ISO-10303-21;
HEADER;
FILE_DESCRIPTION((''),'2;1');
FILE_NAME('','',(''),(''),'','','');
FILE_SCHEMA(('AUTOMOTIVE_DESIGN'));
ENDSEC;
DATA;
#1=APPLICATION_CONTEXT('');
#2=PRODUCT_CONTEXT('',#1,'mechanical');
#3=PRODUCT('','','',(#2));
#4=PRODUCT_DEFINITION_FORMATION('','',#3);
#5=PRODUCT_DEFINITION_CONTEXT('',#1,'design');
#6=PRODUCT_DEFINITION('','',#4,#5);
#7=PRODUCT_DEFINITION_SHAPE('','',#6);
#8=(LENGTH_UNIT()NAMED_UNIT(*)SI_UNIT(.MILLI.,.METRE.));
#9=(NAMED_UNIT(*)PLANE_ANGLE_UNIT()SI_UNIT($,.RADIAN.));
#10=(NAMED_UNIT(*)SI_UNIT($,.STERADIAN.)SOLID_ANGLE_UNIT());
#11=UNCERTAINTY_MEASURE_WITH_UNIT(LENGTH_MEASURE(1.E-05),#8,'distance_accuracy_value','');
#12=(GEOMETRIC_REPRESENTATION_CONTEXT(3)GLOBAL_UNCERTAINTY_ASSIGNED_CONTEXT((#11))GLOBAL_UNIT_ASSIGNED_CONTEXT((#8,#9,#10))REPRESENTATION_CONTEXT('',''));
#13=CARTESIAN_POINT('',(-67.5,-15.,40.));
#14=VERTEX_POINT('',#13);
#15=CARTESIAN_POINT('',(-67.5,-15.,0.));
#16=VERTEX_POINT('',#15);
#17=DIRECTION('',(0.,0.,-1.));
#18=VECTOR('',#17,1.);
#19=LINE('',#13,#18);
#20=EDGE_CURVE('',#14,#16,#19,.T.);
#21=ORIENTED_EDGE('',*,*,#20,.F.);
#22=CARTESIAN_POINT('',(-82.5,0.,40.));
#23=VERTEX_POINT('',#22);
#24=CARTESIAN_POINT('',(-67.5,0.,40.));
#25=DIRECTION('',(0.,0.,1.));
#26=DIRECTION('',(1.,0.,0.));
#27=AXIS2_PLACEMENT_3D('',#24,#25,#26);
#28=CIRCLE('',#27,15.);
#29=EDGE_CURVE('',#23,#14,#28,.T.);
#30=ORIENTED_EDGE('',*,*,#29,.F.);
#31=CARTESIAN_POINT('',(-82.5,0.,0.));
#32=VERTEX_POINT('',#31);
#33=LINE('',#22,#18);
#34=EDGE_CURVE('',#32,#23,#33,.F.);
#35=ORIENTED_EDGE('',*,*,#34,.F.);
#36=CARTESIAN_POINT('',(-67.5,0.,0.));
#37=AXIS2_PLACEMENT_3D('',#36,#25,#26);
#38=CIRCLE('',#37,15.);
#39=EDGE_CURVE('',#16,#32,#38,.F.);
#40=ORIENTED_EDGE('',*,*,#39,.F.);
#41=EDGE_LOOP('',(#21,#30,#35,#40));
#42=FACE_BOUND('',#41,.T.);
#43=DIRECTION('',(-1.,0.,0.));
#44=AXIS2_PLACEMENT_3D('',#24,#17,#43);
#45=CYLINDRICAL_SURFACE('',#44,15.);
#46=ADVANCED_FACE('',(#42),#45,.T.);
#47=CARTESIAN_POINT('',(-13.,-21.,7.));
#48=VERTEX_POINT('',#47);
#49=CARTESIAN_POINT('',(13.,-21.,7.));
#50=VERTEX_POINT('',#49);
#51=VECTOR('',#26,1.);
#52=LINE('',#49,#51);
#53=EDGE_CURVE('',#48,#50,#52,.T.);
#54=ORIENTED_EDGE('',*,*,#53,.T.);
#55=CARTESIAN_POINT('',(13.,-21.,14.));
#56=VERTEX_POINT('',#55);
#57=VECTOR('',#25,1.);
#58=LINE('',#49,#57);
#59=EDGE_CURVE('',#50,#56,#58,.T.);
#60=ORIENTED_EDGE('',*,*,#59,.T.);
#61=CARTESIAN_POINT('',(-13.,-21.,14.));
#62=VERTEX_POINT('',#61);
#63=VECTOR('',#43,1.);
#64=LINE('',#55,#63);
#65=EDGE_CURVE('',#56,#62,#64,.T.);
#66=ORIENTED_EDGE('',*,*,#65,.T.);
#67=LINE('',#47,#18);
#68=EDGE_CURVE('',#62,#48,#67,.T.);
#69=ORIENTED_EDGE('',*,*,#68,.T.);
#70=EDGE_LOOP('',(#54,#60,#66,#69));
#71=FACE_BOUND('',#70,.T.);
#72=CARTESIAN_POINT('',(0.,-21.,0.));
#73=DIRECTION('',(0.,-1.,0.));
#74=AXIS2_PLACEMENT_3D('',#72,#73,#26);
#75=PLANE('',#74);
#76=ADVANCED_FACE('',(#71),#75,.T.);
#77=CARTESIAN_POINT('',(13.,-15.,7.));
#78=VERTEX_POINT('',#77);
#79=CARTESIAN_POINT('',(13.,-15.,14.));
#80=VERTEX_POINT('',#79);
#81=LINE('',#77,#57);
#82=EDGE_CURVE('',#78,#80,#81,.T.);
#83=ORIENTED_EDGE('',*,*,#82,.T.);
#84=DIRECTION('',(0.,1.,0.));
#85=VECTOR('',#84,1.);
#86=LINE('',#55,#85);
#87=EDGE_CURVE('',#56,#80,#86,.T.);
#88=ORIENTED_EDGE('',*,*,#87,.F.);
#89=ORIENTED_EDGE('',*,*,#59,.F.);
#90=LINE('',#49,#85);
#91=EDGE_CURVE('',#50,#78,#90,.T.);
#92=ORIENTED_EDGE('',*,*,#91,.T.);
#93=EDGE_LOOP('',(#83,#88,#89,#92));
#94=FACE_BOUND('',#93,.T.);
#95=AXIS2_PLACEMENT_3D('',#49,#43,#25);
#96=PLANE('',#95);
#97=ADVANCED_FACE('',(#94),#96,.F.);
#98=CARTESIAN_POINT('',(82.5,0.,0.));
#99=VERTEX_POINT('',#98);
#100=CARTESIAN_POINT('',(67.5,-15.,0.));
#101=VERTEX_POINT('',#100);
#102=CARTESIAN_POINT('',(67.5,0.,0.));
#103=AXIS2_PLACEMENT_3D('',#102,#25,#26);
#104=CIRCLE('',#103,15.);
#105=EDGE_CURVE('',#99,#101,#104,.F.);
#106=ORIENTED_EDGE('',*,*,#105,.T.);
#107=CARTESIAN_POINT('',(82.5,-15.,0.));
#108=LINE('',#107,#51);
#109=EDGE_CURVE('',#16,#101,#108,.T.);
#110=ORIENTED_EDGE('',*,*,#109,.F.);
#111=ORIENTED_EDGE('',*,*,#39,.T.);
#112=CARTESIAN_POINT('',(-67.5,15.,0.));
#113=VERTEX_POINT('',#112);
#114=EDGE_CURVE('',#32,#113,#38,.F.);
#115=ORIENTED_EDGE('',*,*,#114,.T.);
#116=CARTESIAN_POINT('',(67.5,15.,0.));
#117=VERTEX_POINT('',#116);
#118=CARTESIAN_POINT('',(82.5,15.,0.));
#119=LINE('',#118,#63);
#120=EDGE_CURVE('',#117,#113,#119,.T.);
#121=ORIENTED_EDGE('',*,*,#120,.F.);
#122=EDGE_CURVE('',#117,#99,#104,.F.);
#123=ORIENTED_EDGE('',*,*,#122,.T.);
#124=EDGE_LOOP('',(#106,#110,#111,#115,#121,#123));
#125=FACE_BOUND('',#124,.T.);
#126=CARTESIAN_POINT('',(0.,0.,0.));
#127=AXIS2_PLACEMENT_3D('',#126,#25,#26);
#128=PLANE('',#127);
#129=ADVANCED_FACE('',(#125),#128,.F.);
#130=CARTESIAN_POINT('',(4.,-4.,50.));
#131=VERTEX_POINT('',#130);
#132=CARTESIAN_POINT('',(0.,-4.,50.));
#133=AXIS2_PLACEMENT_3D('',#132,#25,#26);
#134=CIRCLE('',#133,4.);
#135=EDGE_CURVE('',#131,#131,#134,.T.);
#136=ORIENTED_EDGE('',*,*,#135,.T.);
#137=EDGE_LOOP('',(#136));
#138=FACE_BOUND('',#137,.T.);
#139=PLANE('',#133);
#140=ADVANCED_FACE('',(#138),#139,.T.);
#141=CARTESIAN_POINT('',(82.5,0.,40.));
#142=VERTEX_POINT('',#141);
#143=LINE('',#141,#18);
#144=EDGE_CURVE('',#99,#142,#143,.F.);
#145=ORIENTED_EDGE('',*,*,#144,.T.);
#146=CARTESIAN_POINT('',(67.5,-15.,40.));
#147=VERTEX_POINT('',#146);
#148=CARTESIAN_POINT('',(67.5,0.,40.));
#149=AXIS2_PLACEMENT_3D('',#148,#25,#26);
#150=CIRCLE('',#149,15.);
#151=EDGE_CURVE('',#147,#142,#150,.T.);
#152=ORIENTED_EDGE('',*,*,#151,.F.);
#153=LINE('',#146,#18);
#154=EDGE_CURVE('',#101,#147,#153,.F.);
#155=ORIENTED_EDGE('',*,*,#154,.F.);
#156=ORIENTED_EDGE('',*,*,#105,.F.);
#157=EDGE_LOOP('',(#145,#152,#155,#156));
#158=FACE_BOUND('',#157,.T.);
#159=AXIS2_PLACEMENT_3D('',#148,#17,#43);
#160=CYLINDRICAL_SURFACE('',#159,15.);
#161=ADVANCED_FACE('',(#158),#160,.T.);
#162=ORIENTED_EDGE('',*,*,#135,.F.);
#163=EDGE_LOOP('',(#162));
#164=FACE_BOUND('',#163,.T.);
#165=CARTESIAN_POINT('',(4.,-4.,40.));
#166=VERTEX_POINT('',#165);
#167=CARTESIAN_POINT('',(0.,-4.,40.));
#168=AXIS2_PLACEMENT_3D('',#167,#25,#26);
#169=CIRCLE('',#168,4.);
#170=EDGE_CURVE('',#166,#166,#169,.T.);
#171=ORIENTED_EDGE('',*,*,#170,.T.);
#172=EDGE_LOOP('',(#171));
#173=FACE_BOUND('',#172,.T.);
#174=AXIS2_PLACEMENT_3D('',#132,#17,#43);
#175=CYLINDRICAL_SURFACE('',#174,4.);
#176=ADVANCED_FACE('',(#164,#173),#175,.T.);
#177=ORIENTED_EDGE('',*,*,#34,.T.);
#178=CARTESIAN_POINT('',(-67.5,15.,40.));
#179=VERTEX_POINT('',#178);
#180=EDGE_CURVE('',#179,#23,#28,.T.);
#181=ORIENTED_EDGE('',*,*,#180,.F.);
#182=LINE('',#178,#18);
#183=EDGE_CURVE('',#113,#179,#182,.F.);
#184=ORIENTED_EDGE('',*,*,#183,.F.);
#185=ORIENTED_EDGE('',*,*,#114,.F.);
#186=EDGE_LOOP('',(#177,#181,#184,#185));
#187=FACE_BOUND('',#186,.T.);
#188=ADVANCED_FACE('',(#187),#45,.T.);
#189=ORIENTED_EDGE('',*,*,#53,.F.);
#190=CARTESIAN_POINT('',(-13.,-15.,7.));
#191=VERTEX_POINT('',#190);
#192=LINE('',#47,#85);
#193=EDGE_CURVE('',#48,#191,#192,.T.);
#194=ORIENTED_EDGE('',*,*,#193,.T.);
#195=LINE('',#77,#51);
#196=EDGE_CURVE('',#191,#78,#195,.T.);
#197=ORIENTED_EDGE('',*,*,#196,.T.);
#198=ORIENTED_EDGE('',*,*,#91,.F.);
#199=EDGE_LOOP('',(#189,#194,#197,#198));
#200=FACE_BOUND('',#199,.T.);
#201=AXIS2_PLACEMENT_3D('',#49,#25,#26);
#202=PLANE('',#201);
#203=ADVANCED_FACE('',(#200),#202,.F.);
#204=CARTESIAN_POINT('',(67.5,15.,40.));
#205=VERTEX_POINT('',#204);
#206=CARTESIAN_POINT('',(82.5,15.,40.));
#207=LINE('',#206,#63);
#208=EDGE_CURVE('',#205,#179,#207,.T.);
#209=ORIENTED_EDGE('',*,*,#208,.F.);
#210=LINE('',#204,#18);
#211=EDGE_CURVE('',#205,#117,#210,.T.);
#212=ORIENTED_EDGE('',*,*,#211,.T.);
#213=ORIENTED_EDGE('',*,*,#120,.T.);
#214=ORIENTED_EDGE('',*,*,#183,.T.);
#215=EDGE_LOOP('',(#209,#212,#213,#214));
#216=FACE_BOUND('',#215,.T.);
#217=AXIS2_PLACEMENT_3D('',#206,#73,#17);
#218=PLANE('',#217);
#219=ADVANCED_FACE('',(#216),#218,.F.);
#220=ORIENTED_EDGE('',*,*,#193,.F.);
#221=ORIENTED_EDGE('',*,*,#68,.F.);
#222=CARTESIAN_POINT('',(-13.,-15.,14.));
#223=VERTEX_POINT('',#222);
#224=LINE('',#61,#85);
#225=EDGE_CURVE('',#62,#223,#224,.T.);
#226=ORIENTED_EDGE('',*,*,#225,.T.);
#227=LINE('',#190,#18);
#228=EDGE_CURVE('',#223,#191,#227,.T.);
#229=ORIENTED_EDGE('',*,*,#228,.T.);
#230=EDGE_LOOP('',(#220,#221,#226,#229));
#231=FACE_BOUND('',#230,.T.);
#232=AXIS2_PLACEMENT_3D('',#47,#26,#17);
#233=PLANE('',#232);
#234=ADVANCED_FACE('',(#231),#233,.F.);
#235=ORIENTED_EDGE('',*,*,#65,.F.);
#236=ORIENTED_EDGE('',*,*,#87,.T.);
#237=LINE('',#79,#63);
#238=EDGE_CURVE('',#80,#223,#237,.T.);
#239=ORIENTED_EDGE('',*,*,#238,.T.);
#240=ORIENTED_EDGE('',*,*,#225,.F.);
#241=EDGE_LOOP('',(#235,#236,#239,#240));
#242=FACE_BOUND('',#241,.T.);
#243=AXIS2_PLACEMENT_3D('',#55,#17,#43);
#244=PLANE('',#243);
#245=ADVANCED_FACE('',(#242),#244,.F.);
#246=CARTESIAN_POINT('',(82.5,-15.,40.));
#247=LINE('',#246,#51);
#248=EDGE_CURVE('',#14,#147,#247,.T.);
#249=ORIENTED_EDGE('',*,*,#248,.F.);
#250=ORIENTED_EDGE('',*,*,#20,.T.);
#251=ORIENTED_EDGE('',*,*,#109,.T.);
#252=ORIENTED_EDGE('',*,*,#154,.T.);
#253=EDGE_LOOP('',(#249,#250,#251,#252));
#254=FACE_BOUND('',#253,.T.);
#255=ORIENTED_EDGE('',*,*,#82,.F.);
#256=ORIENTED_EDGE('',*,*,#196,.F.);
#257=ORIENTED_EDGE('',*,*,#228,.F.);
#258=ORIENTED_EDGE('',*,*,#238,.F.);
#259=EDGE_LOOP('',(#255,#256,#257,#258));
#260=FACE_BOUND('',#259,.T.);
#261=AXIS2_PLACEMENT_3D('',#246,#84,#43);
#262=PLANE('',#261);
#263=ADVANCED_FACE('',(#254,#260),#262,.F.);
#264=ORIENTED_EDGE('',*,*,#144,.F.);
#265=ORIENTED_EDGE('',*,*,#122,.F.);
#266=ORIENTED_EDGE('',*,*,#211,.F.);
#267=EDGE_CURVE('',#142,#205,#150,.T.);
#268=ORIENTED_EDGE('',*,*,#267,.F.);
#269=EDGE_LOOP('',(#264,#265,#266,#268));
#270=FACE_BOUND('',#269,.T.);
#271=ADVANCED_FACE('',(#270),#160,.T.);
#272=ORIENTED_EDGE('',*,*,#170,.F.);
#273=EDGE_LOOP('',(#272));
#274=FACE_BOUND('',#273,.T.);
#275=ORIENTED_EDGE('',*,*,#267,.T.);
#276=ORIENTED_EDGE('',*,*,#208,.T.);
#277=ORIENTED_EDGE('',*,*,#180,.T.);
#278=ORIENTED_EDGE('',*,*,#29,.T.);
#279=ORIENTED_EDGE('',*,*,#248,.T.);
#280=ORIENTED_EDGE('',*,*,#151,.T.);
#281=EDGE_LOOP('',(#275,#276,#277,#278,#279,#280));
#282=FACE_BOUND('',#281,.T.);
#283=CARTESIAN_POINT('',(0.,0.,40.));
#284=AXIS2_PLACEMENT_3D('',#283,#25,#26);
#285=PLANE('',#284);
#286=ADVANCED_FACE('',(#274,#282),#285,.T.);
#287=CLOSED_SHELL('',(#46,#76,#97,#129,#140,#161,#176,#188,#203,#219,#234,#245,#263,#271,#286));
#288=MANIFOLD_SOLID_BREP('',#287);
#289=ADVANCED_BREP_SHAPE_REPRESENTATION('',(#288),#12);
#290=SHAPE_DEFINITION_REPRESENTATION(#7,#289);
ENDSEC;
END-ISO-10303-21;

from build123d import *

# Parameters (mm, degrees)
SKETCH1_W           = 165
SKETCH1_H           = 30
BOSS_EXTRUDE1_DEPTH = 40
FILLET1_R           = 15
SKETCH2_W           = 26
SKETCH2_H           = 7
BOSS_EXTRUDE2_DEPTH = 6
SKETCH3_R           = 4
BOSS_EXTRUDE3_DEPTH = 10


with BuildPart() as part:
    # Sketch1 → Boss-Extrude1 (new body)
    with BuildSketch(Plane.XY):
        Rectangle(SKETCH1_W, SKETCH1_H)
    extrude(amount=BOSS_EXTRUDE1_DEPTH)

    # Fillet1
    fillet1_edges = [part.edges().sort_by_distance(p)[0] for p in [
        (-82.5, 15, 20),
        (82.5, -15, 20),
        (-82.5, -15, 20),
        (82.5, 15, 20),
    ]]
    fillet(fillet1_edges, radius=FILLET1_R - 0.0001)  # a hair under: the kernel refuses the full size

    # Sketch2 → Boss-Extrude2 (add)
    with BuildSketch(Plane.XZ.offset(15)):
        with Locations((0, 10.5)):
            Rectangle(SKETCH2_W, SKETCH2_H)
    extrude(amount=BOSS_EXTRUDE2_DEPTH)

    # Sketch3 → Boss-Extrude3 (add)
    with BuildSketch(Plane.XY.offset(40)):
        with Locations((0, -4)):
            Circle(SKETCH3_R)
    extrude(amount=BOSS_EXTRUDE3_DEPTH)


solid = part.part
